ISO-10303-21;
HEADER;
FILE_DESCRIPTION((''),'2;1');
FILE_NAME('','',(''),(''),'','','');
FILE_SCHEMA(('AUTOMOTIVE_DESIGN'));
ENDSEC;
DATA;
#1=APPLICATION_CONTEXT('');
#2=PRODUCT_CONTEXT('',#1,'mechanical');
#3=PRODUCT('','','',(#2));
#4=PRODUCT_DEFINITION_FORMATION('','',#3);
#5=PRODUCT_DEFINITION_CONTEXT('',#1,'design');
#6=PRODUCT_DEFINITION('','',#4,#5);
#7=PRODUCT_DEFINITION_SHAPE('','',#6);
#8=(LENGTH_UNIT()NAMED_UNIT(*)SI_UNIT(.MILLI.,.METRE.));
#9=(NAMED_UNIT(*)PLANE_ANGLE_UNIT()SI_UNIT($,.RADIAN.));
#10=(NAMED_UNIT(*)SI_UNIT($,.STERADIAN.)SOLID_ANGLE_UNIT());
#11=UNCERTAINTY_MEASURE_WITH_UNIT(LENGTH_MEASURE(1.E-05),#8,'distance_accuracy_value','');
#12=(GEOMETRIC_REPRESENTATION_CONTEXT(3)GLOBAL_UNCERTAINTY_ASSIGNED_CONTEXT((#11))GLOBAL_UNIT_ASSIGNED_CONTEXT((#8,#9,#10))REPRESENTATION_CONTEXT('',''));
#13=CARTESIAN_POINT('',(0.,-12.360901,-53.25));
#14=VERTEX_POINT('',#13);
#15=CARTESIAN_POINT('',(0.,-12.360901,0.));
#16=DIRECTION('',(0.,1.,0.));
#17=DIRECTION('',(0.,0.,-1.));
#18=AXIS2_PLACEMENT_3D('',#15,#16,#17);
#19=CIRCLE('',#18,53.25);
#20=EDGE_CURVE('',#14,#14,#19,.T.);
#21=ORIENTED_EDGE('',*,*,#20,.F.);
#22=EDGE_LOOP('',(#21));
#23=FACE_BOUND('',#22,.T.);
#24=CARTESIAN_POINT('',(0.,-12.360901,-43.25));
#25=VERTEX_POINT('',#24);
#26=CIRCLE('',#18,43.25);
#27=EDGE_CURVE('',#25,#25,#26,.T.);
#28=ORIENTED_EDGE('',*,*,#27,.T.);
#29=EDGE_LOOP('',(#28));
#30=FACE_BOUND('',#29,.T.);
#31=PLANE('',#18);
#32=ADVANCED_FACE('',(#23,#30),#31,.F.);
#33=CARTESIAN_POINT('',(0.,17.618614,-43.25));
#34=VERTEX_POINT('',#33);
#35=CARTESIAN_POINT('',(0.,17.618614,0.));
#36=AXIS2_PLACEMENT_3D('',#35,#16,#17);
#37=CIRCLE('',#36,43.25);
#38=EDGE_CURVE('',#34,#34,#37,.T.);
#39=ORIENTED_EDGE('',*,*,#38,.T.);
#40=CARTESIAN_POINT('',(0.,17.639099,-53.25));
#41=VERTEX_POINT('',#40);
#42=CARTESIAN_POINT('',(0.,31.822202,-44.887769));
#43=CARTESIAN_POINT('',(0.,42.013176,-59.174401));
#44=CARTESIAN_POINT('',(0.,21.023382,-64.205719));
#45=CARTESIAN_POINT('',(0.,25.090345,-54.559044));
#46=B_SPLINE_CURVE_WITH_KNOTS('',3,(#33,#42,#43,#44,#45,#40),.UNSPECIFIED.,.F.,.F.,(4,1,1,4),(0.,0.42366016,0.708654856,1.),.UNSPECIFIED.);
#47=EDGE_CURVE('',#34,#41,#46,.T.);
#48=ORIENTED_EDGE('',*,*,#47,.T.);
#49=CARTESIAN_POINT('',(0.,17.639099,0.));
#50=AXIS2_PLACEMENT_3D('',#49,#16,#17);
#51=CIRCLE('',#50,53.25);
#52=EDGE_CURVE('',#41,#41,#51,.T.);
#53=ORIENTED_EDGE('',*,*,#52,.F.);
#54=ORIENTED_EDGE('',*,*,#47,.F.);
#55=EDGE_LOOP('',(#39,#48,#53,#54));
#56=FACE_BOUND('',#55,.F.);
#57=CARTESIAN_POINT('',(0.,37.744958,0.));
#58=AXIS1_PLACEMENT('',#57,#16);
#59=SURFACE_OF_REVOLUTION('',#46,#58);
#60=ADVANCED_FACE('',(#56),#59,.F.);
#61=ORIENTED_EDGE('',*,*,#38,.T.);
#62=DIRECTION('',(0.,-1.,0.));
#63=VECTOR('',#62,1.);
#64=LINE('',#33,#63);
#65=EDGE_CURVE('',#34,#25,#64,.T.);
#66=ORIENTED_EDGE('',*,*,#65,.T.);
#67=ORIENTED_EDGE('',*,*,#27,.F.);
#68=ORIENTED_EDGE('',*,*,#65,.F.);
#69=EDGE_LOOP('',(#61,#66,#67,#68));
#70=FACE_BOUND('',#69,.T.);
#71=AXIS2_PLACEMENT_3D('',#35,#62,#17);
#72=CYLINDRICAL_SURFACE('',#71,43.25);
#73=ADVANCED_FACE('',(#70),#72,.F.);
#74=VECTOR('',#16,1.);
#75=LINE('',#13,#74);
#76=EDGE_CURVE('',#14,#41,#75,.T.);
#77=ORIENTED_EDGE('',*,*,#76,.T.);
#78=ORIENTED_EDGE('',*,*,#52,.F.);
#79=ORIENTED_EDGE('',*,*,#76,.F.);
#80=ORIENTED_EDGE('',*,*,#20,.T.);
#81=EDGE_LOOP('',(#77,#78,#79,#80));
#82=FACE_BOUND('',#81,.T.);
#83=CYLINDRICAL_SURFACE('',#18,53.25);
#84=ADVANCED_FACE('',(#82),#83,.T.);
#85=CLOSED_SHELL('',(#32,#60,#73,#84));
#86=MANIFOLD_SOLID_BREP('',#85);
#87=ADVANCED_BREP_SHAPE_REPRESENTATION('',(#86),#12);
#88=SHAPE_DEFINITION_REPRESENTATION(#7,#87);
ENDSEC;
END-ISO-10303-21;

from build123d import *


with BuildPart() as f2:
    # F0 (on Right) → F2 (revolve)
    with BuildSketch(Plane.YZ):
        with BuildLine():
            Line((-12.3609009758, -43.25), (-12.3609009758, -53.25))
            Line((-12.3609009758, -53.25), (17.6390990242, -53.25))
            add(Edge.make_bspline(
                [(17.618613781, -43.25), (31.8222021326, -44.8877685905), (42.0131757878, -59.1744012288), (21.0233819627, -64.2057192342), (25.0903449501, -54.5590444197), (17.6390990242, -53.25)],
                knots=[0, 0, 0, 0, 0.4236601599, 0.7086548564, 1, 1, 1, 1], degree=3))
            Line((17.618613781, -43.25), (-12.3609009758, -43.25))
        make_face()
    revolve(axis=Axis((0, 37.7449579537, 0), (0, 1, 0)))


solid = f2.part
